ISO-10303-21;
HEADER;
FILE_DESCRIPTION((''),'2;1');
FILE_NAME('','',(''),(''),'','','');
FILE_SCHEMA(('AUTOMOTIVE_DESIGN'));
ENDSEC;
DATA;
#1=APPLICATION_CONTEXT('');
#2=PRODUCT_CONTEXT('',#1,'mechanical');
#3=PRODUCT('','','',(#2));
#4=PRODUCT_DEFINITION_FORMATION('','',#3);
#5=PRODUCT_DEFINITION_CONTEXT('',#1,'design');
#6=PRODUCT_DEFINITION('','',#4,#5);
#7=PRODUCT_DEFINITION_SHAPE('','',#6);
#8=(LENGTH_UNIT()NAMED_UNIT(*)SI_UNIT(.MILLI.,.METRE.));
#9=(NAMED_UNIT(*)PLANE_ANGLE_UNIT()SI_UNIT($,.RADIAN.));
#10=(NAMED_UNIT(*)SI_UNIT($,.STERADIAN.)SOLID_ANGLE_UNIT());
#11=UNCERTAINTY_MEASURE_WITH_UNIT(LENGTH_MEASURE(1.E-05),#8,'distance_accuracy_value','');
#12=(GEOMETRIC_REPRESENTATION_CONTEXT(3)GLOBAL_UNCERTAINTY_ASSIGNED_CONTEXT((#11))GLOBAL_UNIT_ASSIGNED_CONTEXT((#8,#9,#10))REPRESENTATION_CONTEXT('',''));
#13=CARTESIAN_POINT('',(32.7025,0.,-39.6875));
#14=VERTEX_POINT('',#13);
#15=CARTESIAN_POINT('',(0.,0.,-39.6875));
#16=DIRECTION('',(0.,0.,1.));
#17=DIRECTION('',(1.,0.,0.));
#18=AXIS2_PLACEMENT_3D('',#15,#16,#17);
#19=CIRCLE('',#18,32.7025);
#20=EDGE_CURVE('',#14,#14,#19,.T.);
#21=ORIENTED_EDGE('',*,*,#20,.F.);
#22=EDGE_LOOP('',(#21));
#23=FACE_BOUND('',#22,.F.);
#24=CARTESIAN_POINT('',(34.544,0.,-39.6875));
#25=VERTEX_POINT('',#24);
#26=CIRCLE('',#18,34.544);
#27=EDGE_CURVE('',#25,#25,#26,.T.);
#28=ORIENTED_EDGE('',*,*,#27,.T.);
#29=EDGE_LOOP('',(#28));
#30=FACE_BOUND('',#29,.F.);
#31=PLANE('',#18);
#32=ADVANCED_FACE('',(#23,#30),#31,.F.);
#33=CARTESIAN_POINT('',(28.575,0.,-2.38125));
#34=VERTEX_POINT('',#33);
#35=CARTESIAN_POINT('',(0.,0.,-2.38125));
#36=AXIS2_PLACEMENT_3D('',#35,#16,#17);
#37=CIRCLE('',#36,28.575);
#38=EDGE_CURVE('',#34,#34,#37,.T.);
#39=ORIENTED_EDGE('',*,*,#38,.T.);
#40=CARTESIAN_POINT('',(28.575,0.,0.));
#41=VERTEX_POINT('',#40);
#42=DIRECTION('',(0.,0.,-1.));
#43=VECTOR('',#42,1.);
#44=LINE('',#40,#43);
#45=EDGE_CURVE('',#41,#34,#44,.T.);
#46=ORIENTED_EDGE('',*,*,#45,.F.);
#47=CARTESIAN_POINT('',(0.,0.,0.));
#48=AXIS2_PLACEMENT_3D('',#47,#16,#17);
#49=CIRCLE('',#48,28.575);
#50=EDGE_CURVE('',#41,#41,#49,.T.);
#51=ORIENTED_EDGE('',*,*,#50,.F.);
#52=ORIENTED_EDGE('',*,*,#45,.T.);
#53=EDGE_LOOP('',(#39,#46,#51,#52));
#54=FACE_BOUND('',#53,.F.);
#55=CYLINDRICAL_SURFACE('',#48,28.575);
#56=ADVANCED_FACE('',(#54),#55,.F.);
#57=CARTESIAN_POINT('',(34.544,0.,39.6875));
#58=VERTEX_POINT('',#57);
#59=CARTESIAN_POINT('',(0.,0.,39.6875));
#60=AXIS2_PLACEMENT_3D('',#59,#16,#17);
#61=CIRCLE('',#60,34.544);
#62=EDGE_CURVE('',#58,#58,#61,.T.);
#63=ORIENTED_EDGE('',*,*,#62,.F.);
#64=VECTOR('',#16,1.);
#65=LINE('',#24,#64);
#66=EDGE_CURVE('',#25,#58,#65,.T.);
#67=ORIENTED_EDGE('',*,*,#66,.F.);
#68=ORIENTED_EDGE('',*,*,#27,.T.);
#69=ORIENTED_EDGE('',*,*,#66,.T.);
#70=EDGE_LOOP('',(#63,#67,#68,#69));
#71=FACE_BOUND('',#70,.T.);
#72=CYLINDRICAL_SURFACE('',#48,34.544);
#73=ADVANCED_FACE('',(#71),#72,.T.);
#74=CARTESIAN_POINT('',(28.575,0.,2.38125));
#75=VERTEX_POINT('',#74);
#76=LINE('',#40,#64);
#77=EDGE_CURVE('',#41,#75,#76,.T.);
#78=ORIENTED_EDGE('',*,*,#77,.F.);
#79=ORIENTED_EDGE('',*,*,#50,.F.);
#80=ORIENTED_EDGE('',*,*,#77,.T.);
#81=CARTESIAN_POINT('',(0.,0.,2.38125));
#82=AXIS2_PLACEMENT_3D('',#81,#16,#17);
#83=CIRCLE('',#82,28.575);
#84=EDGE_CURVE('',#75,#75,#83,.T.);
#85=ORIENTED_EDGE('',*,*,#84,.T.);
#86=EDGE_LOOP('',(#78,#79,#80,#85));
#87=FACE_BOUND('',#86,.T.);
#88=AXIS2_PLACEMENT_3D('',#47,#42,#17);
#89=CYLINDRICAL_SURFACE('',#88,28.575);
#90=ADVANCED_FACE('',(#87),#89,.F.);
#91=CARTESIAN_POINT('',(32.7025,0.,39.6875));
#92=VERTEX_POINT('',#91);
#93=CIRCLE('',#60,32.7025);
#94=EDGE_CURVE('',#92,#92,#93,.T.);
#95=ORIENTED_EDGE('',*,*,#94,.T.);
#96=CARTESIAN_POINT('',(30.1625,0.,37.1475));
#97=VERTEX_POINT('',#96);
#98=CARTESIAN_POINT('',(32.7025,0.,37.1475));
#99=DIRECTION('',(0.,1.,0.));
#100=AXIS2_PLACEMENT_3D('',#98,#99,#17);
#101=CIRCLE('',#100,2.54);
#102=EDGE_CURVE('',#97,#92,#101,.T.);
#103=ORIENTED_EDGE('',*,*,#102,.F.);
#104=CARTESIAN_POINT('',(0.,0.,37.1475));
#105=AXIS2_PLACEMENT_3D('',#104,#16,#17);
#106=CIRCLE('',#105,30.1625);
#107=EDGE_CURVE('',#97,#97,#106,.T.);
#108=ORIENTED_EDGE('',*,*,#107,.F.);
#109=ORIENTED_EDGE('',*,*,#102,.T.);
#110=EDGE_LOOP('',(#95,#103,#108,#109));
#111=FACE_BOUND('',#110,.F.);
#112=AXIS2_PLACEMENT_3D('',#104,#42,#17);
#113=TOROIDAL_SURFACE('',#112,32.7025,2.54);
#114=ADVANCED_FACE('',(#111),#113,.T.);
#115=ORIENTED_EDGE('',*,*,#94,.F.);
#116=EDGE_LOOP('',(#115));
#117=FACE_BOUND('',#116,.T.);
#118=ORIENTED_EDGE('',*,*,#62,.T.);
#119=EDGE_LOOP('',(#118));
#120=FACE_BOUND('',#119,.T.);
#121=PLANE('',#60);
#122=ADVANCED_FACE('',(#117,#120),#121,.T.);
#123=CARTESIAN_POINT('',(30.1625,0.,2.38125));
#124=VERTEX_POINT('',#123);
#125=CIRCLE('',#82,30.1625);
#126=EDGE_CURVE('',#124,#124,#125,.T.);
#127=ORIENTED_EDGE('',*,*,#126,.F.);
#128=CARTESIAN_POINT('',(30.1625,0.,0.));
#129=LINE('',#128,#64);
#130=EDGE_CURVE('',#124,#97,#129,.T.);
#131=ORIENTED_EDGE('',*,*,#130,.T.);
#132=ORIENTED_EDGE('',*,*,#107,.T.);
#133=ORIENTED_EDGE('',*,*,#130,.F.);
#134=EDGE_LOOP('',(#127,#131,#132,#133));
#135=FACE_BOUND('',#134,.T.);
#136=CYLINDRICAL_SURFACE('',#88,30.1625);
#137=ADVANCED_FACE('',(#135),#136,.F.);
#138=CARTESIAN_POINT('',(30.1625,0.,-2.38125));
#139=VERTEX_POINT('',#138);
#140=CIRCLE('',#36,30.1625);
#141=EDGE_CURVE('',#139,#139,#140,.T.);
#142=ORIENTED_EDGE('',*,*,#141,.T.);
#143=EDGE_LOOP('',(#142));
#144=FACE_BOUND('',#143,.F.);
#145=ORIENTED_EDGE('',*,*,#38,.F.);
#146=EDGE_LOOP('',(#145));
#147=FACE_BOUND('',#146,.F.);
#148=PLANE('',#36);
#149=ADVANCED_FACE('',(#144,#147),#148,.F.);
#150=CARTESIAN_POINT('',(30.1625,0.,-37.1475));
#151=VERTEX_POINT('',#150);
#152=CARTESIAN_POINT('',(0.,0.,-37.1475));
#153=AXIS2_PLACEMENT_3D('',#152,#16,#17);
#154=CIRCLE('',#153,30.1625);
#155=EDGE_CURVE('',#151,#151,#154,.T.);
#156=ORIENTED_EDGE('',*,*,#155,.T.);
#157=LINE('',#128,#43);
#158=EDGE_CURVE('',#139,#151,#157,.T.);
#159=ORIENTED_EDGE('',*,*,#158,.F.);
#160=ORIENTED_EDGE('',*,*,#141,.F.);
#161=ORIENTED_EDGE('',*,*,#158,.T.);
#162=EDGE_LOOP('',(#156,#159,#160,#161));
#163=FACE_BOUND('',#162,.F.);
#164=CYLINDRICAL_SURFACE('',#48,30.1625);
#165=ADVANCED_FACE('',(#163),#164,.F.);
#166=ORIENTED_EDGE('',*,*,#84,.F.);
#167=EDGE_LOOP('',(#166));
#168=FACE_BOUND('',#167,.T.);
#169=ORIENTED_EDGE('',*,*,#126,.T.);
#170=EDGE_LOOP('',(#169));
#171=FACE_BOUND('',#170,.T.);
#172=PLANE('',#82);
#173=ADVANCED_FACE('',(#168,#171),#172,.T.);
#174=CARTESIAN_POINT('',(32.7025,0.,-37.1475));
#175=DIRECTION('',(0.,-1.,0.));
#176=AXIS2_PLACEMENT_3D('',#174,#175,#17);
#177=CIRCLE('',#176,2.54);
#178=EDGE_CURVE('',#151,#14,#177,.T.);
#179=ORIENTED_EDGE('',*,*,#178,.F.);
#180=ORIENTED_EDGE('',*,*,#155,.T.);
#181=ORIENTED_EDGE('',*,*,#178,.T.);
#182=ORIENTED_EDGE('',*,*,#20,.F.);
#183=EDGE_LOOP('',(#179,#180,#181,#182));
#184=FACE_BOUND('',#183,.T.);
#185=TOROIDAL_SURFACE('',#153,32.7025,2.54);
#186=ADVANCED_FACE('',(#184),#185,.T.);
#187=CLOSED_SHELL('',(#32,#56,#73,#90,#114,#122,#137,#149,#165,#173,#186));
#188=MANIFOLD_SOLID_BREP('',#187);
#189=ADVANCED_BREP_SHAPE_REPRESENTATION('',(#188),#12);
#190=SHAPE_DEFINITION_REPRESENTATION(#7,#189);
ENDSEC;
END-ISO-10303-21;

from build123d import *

# Parameters (mm, degrees)
F0_R          = 34.544
F0_R_2        = 30.1625
F1_DEPTH      = 39.6875
F1_DEPTH_BACK = 39.6875
F0_R_3        = 28.575
F2_DEPTH      = 2.38125
F2_DEPTH_BACK = 2.38125
F3_R          = 2.54


# Not quite as in the source:
# - a length typed as a fraction of an inch, garbled in the dataset ("3 / 203.2 mm" for 3/8 in), is restored


with BuildPart() as f1:
    # F0 (on Top) → F1 (new body, two sides)
    with BuildSketch(Plane.XY) as f1_sk:
        Circle(F0_R)
        Circle(F0_R_2, mode=Mode.SUBTRACT)
    extrude(amount=F1_DEPTH)
    extrude(f1_sk.sketch, amount=-F1_DEPTH_BACK)

    # F0 (on Top) → F2 (join, two sides)
    with BuildSketch(Plane.XY) as f2_sk:
        Circle(F0_R_2)
        Circle(F0_R_3, mode=Mode.SUBTRACT)
    extrude(amount=F2_DEPTH)
    extrude(f2_sk.sketch, amount=-F2_DEPTH_BACK)

    # F3
    f3_edges = [f1.edges().sort_by_distance(p)[0] for p in [
        (-30.1625, 0, 39.6875),
        (-30.1625, 0, -39.6875),
    ]]
    fillet(f3_edges, radius=F3_R)


solid = f1.part
